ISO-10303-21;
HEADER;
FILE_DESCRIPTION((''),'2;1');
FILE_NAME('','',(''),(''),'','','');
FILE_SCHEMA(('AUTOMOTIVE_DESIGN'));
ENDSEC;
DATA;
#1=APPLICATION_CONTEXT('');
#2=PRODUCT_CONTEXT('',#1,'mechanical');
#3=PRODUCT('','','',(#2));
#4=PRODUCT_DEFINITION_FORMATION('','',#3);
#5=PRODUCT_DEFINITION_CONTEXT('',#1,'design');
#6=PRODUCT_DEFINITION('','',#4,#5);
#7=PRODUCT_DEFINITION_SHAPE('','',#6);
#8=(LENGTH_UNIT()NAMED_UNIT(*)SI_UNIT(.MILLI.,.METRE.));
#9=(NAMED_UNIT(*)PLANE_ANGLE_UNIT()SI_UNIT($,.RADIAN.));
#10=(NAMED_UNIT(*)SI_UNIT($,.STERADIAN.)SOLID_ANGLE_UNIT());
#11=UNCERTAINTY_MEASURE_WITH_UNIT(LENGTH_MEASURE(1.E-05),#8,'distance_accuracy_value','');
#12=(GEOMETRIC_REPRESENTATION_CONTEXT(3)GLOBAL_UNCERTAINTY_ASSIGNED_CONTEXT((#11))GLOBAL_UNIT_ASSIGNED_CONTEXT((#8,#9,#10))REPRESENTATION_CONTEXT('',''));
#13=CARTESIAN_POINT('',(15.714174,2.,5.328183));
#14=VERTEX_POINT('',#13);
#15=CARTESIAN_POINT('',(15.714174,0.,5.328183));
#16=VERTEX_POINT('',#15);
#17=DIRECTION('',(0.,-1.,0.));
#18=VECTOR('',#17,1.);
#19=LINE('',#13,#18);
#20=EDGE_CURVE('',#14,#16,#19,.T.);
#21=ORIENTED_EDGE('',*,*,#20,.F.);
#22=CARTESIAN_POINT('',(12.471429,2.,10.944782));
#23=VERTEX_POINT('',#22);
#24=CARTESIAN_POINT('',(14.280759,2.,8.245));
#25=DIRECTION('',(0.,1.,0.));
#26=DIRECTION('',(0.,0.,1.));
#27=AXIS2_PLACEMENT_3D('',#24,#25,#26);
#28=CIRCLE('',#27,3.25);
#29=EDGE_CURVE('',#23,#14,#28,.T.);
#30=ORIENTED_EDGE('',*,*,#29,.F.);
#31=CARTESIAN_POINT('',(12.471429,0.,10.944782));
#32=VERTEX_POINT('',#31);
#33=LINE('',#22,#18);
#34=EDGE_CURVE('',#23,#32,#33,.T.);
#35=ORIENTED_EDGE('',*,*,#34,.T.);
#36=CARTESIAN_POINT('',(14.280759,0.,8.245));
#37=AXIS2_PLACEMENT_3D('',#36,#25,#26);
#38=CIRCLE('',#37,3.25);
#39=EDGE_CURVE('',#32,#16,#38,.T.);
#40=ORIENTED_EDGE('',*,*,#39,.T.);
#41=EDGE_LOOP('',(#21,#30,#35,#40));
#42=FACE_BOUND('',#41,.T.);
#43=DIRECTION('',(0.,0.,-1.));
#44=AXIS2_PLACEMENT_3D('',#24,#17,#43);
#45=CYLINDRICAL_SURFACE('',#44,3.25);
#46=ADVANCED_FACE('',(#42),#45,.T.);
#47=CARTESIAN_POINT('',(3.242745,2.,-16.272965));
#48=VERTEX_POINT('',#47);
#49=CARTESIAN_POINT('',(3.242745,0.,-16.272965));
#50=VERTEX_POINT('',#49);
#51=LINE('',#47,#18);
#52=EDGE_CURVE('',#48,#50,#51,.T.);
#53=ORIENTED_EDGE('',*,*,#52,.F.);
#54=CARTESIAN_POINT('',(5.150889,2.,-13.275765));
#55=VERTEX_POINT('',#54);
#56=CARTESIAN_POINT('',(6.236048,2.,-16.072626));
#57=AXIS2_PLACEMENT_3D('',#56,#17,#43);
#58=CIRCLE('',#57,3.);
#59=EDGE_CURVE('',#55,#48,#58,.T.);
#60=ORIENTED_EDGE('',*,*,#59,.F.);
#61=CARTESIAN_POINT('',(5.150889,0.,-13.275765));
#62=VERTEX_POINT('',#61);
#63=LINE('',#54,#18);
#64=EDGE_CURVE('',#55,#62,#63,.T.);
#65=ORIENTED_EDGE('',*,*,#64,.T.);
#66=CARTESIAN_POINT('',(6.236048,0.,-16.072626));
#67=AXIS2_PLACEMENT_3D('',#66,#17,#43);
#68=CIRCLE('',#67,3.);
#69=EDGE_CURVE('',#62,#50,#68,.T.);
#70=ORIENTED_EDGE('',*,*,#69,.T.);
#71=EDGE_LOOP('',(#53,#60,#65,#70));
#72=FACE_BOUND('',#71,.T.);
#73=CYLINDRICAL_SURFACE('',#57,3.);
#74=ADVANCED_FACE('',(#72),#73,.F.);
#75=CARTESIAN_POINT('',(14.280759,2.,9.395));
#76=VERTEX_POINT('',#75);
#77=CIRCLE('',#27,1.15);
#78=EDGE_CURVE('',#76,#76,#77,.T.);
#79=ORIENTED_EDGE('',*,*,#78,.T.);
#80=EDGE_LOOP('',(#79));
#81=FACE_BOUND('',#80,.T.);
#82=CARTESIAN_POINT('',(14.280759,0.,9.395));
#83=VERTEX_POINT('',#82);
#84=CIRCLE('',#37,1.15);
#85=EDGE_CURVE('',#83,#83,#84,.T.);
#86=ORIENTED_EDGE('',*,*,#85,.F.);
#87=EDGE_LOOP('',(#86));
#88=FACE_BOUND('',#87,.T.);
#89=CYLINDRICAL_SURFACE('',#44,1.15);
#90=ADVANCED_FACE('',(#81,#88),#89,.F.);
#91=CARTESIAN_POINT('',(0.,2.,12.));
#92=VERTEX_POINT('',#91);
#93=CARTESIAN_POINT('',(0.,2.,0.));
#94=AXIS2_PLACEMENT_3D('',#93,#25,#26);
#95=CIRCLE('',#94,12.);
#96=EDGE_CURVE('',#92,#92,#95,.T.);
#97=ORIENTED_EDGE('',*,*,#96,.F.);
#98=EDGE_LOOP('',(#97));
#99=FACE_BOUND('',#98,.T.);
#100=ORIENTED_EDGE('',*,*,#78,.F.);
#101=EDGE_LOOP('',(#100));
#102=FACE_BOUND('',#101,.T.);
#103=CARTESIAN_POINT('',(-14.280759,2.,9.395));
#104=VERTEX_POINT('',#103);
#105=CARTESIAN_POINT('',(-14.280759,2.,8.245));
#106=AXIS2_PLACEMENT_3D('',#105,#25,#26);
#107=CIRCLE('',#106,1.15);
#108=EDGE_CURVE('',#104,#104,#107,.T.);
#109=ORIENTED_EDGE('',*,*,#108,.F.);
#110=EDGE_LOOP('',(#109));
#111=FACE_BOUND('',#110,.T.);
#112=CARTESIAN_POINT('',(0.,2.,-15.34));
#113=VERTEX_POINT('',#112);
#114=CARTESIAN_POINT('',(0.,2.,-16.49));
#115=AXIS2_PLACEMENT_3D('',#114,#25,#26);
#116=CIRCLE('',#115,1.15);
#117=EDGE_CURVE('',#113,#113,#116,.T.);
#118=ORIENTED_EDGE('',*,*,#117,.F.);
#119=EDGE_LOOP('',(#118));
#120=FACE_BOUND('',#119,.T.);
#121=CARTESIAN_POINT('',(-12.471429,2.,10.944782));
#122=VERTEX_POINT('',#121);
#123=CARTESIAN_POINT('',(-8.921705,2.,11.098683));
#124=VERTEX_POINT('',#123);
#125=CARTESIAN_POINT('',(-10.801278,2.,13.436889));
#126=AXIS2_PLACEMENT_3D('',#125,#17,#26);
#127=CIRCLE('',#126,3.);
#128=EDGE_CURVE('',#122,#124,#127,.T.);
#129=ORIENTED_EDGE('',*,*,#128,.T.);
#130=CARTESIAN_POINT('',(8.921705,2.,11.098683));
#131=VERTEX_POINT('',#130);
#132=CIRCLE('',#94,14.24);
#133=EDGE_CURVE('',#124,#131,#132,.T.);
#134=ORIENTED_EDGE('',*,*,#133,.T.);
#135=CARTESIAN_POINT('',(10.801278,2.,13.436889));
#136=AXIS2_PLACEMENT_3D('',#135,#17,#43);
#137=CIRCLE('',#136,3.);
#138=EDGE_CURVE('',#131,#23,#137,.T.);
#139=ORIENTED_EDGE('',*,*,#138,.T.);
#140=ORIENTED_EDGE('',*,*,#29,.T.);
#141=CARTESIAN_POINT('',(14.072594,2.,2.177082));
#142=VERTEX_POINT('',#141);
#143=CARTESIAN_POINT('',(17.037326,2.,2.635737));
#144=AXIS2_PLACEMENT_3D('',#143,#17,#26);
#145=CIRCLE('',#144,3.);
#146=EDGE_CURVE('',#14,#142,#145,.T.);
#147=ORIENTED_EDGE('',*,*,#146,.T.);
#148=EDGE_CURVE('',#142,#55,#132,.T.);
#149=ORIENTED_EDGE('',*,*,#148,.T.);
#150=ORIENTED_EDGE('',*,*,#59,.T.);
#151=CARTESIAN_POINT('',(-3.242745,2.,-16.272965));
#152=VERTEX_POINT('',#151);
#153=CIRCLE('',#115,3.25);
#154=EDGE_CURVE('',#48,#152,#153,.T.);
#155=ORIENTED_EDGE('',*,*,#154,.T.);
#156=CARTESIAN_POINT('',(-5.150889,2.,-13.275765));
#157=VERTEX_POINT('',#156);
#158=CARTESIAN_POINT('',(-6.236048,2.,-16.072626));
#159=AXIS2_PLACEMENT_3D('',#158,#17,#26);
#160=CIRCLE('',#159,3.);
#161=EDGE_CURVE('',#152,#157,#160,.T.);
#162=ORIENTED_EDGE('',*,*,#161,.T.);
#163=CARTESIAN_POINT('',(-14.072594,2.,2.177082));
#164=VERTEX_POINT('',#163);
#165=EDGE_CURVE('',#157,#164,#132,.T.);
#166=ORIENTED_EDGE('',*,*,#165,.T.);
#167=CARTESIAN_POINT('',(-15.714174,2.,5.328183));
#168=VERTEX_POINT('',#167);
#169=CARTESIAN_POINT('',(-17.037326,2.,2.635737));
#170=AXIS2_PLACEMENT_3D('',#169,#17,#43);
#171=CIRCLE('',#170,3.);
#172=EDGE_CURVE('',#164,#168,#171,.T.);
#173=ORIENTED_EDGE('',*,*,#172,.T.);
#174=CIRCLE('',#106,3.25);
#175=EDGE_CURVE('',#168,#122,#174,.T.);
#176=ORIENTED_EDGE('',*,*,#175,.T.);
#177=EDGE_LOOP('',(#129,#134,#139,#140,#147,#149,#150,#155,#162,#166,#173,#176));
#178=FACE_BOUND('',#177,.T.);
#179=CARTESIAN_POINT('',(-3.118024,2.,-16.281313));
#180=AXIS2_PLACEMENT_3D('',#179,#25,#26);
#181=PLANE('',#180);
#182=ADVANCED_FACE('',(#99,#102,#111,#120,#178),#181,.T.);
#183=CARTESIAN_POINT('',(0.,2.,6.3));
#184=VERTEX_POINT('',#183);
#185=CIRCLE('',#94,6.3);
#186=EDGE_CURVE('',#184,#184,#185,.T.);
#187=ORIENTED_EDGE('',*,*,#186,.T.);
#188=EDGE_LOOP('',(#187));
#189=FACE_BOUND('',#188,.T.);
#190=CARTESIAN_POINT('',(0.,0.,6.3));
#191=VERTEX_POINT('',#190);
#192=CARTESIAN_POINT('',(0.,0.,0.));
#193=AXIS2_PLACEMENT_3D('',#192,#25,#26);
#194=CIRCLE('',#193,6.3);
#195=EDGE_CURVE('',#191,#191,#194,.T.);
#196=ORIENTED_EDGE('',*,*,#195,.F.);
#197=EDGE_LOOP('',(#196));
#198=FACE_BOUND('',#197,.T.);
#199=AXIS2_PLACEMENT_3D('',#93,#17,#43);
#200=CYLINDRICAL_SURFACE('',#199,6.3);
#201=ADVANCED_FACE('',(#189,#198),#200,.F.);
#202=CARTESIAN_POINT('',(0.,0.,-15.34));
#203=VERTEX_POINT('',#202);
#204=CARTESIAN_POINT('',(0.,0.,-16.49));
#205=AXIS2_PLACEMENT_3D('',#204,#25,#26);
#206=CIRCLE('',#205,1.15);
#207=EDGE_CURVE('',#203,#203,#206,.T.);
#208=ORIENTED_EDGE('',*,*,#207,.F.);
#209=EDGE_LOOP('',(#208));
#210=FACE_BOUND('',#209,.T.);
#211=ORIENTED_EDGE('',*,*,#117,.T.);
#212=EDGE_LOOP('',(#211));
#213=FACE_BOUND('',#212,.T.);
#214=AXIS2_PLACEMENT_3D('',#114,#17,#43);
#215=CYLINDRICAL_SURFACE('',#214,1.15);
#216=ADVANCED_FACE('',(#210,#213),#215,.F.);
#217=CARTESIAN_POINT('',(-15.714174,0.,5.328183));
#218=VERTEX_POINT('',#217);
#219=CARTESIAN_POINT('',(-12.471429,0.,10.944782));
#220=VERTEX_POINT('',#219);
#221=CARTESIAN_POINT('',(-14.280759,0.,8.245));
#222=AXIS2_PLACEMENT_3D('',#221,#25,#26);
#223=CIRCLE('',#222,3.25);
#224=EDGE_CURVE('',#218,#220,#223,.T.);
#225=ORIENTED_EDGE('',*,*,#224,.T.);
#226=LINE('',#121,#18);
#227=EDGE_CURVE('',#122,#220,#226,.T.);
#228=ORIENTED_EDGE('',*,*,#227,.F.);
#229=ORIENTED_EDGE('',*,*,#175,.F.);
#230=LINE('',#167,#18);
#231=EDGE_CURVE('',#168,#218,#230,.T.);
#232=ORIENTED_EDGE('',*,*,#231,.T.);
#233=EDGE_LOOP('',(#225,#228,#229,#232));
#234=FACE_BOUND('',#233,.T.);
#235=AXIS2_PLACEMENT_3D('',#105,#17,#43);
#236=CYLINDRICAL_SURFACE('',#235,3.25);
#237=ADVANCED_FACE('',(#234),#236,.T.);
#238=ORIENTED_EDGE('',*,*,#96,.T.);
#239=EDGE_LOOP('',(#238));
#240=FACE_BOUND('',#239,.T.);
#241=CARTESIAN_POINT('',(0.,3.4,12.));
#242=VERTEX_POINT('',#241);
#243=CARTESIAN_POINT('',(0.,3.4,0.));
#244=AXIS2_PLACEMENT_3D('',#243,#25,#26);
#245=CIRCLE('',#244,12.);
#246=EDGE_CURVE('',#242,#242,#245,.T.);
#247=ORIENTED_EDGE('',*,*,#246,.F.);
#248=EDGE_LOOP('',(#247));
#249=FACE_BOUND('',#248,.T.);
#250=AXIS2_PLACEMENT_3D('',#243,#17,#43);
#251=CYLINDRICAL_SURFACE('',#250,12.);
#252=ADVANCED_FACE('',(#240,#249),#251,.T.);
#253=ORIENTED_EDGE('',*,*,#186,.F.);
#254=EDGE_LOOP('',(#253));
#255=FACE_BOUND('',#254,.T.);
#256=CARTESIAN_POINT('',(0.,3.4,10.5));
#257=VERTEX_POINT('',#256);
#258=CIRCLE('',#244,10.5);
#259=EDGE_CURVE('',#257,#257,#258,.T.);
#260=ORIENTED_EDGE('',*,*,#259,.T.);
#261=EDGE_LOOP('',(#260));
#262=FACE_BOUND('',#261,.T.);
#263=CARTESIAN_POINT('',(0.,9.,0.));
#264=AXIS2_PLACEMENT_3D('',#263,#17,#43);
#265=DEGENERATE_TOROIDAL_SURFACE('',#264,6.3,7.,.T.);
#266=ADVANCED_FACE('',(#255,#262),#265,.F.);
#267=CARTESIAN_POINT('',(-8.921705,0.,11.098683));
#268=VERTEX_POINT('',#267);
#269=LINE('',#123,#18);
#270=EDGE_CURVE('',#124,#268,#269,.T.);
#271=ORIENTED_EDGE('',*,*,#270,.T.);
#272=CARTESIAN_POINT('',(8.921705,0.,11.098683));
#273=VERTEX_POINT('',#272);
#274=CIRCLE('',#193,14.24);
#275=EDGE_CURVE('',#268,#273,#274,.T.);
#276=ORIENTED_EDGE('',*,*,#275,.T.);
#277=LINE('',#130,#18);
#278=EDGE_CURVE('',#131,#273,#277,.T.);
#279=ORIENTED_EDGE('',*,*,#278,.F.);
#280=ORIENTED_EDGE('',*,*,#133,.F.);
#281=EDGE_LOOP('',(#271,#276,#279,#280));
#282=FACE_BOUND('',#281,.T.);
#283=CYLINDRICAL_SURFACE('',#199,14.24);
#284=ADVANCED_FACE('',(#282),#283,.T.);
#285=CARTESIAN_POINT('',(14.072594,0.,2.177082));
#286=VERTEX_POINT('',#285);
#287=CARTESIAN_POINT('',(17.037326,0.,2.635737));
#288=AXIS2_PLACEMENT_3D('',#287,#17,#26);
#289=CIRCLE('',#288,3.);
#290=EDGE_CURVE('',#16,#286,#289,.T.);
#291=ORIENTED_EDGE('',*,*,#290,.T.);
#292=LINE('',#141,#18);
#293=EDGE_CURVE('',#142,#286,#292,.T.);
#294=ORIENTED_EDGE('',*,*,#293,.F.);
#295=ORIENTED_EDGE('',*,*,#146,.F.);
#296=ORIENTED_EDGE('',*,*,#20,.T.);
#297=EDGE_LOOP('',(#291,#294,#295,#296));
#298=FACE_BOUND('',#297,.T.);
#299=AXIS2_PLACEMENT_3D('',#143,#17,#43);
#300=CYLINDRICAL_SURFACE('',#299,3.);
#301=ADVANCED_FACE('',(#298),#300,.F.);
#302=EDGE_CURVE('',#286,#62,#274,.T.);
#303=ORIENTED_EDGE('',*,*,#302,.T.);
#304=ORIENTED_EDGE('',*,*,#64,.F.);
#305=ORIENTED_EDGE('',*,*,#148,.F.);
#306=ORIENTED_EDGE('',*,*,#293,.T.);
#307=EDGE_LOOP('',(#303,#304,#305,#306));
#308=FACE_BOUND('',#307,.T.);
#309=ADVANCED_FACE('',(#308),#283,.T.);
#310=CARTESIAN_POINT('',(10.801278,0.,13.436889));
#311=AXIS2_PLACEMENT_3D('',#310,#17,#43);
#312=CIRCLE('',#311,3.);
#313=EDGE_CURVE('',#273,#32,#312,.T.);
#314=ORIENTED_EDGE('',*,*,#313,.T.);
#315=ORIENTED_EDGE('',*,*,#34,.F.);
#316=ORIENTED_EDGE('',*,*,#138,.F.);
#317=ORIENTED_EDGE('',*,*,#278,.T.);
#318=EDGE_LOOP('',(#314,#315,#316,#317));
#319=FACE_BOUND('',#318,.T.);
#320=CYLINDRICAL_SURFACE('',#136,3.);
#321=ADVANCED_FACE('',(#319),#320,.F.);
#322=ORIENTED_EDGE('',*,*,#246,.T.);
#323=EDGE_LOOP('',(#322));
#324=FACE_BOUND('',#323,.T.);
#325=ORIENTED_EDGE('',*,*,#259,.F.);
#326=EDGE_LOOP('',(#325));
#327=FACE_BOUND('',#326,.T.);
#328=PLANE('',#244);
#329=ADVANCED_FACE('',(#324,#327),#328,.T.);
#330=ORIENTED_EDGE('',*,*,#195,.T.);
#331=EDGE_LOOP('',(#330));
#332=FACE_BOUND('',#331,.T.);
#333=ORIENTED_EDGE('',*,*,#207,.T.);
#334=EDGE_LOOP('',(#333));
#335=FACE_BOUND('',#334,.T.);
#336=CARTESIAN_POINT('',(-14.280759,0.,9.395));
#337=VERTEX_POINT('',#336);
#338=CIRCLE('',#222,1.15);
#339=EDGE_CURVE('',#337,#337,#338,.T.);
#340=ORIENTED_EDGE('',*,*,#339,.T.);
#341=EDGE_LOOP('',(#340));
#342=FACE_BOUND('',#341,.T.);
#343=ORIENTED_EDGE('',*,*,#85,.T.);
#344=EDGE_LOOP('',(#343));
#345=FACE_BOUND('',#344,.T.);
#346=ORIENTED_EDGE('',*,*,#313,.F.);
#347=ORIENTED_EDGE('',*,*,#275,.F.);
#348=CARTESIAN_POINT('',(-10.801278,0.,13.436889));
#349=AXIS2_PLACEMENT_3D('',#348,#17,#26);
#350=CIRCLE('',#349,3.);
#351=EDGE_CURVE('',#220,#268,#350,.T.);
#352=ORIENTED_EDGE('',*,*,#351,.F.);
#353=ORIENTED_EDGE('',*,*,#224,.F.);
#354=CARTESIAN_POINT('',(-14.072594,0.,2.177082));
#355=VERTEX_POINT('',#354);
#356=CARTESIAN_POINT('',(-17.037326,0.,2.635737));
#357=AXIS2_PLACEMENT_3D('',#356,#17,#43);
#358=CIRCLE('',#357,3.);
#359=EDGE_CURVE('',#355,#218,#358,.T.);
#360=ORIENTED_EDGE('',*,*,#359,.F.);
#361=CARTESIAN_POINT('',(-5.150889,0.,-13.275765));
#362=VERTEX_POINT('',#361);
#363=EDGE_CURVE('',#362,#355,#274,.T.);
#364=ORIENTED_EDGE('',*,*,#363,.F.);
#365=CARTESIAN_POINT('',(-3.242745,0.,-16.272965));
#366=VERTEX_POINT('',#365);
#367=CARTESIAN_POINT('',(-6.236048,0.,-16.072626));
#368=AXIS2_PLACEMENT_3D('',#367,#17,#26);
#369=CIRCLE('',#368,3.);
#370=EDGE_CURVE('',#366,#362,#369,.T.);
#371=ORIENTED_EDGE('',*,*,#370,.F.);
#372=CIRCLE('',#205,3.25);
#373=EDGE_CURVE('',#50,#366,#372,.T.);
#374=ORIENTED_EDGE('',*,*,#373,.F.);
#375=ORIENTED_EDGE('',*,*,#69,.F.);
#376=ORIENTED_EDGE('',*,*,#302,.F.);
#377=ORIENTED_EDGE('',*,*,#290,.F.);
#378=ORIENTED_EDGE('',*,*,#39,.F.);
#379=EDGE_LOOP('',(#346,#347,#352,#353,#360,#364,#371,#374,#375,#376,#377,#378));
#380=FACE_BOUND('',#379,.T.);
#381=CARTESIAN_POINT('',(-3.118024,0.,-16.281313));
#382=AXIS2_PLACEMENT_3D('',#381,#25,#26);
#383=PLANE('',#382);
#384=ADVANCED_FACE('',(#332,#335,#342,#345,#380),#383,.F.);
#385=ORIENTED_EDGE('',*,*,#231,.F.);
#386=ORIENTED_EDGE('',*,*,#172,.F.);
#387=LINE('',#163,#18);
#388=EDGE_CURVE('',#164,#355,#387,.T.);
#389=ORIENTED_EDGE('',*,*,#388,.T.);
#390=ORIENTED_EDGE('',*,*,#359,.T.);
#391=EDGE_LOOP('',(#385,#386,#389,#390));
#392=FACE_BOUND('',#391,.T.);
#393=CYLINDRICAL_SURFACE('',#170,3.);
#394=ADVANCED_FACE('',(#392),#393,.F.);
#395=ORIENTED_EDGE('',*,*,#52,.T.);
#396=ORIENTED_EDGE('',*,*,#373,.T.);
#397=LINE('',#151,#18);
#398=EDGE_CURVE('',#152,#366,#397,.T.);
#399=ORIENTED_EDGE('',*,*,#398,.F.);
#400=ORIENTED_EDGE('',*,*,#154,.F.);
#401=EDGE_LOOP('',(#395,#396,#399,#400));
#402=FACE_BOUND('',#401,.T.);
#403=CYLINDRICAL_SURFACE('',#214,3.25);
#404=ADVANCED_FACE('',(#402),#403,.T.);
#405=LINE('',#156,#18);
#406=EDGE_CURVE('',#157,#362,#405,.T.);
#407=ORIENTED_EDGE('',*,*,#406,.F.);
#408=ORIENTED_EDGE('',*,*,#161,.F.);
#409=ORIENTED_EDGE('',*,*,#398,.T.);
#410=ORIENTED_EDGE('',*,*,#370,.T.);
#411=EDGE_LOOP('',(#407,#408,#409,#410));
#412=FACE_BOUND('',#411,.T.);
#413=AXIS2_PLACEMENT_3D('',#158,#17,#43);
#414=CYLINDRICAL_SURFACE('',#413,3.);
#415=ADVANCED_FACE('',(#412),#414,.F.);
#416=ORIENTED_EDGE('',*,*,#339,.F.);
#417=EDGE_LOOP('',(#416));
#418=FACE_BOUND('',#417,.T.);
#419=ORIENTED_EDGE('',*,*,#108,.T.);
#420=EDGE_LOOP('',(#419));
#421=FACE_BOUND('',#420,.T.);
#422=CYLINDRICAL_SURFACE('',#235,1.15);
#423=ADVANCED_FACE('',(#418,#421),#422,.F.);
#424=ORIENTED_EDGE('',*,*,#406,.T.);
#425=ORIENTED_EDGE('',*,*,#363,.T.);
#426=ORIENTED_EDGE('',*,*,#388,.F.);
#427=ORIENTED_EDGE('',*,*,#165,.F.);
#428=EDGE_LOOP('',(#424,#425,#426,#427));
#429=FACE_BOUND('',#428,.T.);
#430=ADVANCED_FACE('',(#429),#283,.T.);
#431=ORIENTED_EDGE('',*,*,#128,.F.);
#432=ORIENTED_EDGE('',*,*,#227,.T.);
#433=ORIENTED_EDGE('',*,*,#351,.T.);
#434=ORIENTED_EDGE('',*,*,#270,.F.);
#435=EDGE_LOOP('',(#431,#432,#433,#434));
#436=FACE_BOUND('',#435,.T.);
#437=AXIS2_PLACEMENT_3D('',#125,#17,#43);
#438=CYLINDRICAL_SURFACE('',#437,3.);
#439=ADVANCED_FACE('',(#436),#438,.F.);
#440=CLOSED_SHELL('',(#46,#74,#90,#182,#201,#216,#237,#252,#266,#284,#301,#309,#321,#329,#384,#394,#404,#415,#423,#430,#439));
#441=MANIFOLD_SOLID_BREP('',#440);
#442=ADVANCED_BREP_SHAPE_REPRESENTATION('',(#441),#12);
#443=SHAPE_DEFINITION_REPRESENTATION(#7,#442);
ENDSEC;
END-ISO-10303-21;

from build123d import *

# Parameters (mm, degrees)
SKETCH_1_R      = 1.15
SKETCH_1_R_2    = 6.3
EXTRUDE_1_DEPTH = 2
SKETCH_2_R      = 12
SKETCH_2_R_2    = 10.5
EXTRUDE_2_DEPTH = 1.4
FILLET_1_R      = 7


with BuildPart() as part:
    # Эскиз1 → Бобышка-Вытянуть1 (new body)
    with BuildSketch(Plane(origin=(0, 0, 0), x_dir=(1, 0, 0), z_dir=(0, 1, 0))):
        with BuildLine():
            ThreePointArc((-5.15088911, 13.27576519), (-12.33220175, 7.12), (-14.072594464, -2.177081774))
            ThreePointArc((-14.072594464, -2.177081774), (-14.376715993, -4.021792929), (-15.714174027, -5.328183054))
            ThreePointArc((-15.714174027, -5.328183054), (-17.095341471, -9.87), (-12.471428894, -10.94478238))
            ThreePointArc((-12.471428894, -10.94478238), (-10.671332842, -10.439704809), (-8.921705354, -11.098683416))
            ThreePointArc((-8.921705354, -11.098683416), (0, -14.24), (8.921705354, -11.098683416))
            ThreePointArc((8.921705354, -11.098683416), (10.671332842, -10.439704809), (12.471428894, -10.94478238))
            ThreePointArc((12.471428894, -10.94478238), (17.095341471, -9.87), (15.714174027, -5.328183054))
            ThreePointArc((15.714174027, -5.328183054), (14.376715993, -4.021792929), (14.072594464, -2.177081774))
            ThreePointArc((14.072594464, -2.177081774), (12.33220175, 7.12), (5.15088911, 13.27576519))
            ThreePointArc((5.15088911, 13.27576519), (3.705383152, 14.461497738), (3.242745133, 16.272965434))
            ThreePointArc((3.242745133, 16.272965434), (0, 19.74), (-3.242745133, 16.272965434))
            ThreePointArc((-3.242745133, 16.272965434), (-3.705383152, 14.461497738), (-5.15088911, 13.27576519))
        make_face()
        with Locations(Location((0, 16.49, 0), (0, 0, 270))):
            Circle(SKETCH_1_R, mode=Mode.SUBTRACT)
        with Locations(Location((0, 0, 0), (0, 0, 270))):
            Circle(SKETCH_1_R_2, mode=Mode.SUBTRACT)
        with Locations(Location((14.280758908, -8.245, 0), (0, 0, 270))):
            Circle(SKETCH_1_R, mode=Mode.SUBTRACT)
        with Locations(Location((-14.280758908, -8.245, 0), (0, 0, 270))):
            Circle(SKETCH_1_R, mode=Mode.SUBTRACT)
    extrude(amount=EXTRUDE_1_DEPTH)

    # Эскиз2 → Бобышка-Вытянуть2 (add)
    with BuildSketch(Plane(origin=(0, 2, 0), x_dir=(1, 0, 0), z_dir=(0, 1, 0))):
        with Locations(Location((0, 0, 0), (0, 0, 270))):
            Circle(SKETCH_2_R)
        with Locations(Location((0, 0, 0), (0, 0, 270))):
            Circle(SKETCH_2_R_2, mode=Mode.SUBTRACT)
    extrude(amount=EXTRUDE_2_DEPTH)

    # Скругление1
    # the kernel refuses this fillet: 7 mm, written as the material it adds along each edge
    with BuildSketch(Plane(origin=(0, 2, 0), x_dir=(0, 0, 1), z_dir=(-1, 0, 0))) as fillet_1_piece_1:
        with BuildLine():
            CenterArc((6.3, 7), FILLET_1_R, 270, 36.869897646)
            Line((10.5, 1.4), (10.5, 0))
            Line((10.5, 0), (6.3, 0))
        make_face()
    revolve(axis=Axis((0, 2, 0), (0, 1, 0)))


solid = part.part
